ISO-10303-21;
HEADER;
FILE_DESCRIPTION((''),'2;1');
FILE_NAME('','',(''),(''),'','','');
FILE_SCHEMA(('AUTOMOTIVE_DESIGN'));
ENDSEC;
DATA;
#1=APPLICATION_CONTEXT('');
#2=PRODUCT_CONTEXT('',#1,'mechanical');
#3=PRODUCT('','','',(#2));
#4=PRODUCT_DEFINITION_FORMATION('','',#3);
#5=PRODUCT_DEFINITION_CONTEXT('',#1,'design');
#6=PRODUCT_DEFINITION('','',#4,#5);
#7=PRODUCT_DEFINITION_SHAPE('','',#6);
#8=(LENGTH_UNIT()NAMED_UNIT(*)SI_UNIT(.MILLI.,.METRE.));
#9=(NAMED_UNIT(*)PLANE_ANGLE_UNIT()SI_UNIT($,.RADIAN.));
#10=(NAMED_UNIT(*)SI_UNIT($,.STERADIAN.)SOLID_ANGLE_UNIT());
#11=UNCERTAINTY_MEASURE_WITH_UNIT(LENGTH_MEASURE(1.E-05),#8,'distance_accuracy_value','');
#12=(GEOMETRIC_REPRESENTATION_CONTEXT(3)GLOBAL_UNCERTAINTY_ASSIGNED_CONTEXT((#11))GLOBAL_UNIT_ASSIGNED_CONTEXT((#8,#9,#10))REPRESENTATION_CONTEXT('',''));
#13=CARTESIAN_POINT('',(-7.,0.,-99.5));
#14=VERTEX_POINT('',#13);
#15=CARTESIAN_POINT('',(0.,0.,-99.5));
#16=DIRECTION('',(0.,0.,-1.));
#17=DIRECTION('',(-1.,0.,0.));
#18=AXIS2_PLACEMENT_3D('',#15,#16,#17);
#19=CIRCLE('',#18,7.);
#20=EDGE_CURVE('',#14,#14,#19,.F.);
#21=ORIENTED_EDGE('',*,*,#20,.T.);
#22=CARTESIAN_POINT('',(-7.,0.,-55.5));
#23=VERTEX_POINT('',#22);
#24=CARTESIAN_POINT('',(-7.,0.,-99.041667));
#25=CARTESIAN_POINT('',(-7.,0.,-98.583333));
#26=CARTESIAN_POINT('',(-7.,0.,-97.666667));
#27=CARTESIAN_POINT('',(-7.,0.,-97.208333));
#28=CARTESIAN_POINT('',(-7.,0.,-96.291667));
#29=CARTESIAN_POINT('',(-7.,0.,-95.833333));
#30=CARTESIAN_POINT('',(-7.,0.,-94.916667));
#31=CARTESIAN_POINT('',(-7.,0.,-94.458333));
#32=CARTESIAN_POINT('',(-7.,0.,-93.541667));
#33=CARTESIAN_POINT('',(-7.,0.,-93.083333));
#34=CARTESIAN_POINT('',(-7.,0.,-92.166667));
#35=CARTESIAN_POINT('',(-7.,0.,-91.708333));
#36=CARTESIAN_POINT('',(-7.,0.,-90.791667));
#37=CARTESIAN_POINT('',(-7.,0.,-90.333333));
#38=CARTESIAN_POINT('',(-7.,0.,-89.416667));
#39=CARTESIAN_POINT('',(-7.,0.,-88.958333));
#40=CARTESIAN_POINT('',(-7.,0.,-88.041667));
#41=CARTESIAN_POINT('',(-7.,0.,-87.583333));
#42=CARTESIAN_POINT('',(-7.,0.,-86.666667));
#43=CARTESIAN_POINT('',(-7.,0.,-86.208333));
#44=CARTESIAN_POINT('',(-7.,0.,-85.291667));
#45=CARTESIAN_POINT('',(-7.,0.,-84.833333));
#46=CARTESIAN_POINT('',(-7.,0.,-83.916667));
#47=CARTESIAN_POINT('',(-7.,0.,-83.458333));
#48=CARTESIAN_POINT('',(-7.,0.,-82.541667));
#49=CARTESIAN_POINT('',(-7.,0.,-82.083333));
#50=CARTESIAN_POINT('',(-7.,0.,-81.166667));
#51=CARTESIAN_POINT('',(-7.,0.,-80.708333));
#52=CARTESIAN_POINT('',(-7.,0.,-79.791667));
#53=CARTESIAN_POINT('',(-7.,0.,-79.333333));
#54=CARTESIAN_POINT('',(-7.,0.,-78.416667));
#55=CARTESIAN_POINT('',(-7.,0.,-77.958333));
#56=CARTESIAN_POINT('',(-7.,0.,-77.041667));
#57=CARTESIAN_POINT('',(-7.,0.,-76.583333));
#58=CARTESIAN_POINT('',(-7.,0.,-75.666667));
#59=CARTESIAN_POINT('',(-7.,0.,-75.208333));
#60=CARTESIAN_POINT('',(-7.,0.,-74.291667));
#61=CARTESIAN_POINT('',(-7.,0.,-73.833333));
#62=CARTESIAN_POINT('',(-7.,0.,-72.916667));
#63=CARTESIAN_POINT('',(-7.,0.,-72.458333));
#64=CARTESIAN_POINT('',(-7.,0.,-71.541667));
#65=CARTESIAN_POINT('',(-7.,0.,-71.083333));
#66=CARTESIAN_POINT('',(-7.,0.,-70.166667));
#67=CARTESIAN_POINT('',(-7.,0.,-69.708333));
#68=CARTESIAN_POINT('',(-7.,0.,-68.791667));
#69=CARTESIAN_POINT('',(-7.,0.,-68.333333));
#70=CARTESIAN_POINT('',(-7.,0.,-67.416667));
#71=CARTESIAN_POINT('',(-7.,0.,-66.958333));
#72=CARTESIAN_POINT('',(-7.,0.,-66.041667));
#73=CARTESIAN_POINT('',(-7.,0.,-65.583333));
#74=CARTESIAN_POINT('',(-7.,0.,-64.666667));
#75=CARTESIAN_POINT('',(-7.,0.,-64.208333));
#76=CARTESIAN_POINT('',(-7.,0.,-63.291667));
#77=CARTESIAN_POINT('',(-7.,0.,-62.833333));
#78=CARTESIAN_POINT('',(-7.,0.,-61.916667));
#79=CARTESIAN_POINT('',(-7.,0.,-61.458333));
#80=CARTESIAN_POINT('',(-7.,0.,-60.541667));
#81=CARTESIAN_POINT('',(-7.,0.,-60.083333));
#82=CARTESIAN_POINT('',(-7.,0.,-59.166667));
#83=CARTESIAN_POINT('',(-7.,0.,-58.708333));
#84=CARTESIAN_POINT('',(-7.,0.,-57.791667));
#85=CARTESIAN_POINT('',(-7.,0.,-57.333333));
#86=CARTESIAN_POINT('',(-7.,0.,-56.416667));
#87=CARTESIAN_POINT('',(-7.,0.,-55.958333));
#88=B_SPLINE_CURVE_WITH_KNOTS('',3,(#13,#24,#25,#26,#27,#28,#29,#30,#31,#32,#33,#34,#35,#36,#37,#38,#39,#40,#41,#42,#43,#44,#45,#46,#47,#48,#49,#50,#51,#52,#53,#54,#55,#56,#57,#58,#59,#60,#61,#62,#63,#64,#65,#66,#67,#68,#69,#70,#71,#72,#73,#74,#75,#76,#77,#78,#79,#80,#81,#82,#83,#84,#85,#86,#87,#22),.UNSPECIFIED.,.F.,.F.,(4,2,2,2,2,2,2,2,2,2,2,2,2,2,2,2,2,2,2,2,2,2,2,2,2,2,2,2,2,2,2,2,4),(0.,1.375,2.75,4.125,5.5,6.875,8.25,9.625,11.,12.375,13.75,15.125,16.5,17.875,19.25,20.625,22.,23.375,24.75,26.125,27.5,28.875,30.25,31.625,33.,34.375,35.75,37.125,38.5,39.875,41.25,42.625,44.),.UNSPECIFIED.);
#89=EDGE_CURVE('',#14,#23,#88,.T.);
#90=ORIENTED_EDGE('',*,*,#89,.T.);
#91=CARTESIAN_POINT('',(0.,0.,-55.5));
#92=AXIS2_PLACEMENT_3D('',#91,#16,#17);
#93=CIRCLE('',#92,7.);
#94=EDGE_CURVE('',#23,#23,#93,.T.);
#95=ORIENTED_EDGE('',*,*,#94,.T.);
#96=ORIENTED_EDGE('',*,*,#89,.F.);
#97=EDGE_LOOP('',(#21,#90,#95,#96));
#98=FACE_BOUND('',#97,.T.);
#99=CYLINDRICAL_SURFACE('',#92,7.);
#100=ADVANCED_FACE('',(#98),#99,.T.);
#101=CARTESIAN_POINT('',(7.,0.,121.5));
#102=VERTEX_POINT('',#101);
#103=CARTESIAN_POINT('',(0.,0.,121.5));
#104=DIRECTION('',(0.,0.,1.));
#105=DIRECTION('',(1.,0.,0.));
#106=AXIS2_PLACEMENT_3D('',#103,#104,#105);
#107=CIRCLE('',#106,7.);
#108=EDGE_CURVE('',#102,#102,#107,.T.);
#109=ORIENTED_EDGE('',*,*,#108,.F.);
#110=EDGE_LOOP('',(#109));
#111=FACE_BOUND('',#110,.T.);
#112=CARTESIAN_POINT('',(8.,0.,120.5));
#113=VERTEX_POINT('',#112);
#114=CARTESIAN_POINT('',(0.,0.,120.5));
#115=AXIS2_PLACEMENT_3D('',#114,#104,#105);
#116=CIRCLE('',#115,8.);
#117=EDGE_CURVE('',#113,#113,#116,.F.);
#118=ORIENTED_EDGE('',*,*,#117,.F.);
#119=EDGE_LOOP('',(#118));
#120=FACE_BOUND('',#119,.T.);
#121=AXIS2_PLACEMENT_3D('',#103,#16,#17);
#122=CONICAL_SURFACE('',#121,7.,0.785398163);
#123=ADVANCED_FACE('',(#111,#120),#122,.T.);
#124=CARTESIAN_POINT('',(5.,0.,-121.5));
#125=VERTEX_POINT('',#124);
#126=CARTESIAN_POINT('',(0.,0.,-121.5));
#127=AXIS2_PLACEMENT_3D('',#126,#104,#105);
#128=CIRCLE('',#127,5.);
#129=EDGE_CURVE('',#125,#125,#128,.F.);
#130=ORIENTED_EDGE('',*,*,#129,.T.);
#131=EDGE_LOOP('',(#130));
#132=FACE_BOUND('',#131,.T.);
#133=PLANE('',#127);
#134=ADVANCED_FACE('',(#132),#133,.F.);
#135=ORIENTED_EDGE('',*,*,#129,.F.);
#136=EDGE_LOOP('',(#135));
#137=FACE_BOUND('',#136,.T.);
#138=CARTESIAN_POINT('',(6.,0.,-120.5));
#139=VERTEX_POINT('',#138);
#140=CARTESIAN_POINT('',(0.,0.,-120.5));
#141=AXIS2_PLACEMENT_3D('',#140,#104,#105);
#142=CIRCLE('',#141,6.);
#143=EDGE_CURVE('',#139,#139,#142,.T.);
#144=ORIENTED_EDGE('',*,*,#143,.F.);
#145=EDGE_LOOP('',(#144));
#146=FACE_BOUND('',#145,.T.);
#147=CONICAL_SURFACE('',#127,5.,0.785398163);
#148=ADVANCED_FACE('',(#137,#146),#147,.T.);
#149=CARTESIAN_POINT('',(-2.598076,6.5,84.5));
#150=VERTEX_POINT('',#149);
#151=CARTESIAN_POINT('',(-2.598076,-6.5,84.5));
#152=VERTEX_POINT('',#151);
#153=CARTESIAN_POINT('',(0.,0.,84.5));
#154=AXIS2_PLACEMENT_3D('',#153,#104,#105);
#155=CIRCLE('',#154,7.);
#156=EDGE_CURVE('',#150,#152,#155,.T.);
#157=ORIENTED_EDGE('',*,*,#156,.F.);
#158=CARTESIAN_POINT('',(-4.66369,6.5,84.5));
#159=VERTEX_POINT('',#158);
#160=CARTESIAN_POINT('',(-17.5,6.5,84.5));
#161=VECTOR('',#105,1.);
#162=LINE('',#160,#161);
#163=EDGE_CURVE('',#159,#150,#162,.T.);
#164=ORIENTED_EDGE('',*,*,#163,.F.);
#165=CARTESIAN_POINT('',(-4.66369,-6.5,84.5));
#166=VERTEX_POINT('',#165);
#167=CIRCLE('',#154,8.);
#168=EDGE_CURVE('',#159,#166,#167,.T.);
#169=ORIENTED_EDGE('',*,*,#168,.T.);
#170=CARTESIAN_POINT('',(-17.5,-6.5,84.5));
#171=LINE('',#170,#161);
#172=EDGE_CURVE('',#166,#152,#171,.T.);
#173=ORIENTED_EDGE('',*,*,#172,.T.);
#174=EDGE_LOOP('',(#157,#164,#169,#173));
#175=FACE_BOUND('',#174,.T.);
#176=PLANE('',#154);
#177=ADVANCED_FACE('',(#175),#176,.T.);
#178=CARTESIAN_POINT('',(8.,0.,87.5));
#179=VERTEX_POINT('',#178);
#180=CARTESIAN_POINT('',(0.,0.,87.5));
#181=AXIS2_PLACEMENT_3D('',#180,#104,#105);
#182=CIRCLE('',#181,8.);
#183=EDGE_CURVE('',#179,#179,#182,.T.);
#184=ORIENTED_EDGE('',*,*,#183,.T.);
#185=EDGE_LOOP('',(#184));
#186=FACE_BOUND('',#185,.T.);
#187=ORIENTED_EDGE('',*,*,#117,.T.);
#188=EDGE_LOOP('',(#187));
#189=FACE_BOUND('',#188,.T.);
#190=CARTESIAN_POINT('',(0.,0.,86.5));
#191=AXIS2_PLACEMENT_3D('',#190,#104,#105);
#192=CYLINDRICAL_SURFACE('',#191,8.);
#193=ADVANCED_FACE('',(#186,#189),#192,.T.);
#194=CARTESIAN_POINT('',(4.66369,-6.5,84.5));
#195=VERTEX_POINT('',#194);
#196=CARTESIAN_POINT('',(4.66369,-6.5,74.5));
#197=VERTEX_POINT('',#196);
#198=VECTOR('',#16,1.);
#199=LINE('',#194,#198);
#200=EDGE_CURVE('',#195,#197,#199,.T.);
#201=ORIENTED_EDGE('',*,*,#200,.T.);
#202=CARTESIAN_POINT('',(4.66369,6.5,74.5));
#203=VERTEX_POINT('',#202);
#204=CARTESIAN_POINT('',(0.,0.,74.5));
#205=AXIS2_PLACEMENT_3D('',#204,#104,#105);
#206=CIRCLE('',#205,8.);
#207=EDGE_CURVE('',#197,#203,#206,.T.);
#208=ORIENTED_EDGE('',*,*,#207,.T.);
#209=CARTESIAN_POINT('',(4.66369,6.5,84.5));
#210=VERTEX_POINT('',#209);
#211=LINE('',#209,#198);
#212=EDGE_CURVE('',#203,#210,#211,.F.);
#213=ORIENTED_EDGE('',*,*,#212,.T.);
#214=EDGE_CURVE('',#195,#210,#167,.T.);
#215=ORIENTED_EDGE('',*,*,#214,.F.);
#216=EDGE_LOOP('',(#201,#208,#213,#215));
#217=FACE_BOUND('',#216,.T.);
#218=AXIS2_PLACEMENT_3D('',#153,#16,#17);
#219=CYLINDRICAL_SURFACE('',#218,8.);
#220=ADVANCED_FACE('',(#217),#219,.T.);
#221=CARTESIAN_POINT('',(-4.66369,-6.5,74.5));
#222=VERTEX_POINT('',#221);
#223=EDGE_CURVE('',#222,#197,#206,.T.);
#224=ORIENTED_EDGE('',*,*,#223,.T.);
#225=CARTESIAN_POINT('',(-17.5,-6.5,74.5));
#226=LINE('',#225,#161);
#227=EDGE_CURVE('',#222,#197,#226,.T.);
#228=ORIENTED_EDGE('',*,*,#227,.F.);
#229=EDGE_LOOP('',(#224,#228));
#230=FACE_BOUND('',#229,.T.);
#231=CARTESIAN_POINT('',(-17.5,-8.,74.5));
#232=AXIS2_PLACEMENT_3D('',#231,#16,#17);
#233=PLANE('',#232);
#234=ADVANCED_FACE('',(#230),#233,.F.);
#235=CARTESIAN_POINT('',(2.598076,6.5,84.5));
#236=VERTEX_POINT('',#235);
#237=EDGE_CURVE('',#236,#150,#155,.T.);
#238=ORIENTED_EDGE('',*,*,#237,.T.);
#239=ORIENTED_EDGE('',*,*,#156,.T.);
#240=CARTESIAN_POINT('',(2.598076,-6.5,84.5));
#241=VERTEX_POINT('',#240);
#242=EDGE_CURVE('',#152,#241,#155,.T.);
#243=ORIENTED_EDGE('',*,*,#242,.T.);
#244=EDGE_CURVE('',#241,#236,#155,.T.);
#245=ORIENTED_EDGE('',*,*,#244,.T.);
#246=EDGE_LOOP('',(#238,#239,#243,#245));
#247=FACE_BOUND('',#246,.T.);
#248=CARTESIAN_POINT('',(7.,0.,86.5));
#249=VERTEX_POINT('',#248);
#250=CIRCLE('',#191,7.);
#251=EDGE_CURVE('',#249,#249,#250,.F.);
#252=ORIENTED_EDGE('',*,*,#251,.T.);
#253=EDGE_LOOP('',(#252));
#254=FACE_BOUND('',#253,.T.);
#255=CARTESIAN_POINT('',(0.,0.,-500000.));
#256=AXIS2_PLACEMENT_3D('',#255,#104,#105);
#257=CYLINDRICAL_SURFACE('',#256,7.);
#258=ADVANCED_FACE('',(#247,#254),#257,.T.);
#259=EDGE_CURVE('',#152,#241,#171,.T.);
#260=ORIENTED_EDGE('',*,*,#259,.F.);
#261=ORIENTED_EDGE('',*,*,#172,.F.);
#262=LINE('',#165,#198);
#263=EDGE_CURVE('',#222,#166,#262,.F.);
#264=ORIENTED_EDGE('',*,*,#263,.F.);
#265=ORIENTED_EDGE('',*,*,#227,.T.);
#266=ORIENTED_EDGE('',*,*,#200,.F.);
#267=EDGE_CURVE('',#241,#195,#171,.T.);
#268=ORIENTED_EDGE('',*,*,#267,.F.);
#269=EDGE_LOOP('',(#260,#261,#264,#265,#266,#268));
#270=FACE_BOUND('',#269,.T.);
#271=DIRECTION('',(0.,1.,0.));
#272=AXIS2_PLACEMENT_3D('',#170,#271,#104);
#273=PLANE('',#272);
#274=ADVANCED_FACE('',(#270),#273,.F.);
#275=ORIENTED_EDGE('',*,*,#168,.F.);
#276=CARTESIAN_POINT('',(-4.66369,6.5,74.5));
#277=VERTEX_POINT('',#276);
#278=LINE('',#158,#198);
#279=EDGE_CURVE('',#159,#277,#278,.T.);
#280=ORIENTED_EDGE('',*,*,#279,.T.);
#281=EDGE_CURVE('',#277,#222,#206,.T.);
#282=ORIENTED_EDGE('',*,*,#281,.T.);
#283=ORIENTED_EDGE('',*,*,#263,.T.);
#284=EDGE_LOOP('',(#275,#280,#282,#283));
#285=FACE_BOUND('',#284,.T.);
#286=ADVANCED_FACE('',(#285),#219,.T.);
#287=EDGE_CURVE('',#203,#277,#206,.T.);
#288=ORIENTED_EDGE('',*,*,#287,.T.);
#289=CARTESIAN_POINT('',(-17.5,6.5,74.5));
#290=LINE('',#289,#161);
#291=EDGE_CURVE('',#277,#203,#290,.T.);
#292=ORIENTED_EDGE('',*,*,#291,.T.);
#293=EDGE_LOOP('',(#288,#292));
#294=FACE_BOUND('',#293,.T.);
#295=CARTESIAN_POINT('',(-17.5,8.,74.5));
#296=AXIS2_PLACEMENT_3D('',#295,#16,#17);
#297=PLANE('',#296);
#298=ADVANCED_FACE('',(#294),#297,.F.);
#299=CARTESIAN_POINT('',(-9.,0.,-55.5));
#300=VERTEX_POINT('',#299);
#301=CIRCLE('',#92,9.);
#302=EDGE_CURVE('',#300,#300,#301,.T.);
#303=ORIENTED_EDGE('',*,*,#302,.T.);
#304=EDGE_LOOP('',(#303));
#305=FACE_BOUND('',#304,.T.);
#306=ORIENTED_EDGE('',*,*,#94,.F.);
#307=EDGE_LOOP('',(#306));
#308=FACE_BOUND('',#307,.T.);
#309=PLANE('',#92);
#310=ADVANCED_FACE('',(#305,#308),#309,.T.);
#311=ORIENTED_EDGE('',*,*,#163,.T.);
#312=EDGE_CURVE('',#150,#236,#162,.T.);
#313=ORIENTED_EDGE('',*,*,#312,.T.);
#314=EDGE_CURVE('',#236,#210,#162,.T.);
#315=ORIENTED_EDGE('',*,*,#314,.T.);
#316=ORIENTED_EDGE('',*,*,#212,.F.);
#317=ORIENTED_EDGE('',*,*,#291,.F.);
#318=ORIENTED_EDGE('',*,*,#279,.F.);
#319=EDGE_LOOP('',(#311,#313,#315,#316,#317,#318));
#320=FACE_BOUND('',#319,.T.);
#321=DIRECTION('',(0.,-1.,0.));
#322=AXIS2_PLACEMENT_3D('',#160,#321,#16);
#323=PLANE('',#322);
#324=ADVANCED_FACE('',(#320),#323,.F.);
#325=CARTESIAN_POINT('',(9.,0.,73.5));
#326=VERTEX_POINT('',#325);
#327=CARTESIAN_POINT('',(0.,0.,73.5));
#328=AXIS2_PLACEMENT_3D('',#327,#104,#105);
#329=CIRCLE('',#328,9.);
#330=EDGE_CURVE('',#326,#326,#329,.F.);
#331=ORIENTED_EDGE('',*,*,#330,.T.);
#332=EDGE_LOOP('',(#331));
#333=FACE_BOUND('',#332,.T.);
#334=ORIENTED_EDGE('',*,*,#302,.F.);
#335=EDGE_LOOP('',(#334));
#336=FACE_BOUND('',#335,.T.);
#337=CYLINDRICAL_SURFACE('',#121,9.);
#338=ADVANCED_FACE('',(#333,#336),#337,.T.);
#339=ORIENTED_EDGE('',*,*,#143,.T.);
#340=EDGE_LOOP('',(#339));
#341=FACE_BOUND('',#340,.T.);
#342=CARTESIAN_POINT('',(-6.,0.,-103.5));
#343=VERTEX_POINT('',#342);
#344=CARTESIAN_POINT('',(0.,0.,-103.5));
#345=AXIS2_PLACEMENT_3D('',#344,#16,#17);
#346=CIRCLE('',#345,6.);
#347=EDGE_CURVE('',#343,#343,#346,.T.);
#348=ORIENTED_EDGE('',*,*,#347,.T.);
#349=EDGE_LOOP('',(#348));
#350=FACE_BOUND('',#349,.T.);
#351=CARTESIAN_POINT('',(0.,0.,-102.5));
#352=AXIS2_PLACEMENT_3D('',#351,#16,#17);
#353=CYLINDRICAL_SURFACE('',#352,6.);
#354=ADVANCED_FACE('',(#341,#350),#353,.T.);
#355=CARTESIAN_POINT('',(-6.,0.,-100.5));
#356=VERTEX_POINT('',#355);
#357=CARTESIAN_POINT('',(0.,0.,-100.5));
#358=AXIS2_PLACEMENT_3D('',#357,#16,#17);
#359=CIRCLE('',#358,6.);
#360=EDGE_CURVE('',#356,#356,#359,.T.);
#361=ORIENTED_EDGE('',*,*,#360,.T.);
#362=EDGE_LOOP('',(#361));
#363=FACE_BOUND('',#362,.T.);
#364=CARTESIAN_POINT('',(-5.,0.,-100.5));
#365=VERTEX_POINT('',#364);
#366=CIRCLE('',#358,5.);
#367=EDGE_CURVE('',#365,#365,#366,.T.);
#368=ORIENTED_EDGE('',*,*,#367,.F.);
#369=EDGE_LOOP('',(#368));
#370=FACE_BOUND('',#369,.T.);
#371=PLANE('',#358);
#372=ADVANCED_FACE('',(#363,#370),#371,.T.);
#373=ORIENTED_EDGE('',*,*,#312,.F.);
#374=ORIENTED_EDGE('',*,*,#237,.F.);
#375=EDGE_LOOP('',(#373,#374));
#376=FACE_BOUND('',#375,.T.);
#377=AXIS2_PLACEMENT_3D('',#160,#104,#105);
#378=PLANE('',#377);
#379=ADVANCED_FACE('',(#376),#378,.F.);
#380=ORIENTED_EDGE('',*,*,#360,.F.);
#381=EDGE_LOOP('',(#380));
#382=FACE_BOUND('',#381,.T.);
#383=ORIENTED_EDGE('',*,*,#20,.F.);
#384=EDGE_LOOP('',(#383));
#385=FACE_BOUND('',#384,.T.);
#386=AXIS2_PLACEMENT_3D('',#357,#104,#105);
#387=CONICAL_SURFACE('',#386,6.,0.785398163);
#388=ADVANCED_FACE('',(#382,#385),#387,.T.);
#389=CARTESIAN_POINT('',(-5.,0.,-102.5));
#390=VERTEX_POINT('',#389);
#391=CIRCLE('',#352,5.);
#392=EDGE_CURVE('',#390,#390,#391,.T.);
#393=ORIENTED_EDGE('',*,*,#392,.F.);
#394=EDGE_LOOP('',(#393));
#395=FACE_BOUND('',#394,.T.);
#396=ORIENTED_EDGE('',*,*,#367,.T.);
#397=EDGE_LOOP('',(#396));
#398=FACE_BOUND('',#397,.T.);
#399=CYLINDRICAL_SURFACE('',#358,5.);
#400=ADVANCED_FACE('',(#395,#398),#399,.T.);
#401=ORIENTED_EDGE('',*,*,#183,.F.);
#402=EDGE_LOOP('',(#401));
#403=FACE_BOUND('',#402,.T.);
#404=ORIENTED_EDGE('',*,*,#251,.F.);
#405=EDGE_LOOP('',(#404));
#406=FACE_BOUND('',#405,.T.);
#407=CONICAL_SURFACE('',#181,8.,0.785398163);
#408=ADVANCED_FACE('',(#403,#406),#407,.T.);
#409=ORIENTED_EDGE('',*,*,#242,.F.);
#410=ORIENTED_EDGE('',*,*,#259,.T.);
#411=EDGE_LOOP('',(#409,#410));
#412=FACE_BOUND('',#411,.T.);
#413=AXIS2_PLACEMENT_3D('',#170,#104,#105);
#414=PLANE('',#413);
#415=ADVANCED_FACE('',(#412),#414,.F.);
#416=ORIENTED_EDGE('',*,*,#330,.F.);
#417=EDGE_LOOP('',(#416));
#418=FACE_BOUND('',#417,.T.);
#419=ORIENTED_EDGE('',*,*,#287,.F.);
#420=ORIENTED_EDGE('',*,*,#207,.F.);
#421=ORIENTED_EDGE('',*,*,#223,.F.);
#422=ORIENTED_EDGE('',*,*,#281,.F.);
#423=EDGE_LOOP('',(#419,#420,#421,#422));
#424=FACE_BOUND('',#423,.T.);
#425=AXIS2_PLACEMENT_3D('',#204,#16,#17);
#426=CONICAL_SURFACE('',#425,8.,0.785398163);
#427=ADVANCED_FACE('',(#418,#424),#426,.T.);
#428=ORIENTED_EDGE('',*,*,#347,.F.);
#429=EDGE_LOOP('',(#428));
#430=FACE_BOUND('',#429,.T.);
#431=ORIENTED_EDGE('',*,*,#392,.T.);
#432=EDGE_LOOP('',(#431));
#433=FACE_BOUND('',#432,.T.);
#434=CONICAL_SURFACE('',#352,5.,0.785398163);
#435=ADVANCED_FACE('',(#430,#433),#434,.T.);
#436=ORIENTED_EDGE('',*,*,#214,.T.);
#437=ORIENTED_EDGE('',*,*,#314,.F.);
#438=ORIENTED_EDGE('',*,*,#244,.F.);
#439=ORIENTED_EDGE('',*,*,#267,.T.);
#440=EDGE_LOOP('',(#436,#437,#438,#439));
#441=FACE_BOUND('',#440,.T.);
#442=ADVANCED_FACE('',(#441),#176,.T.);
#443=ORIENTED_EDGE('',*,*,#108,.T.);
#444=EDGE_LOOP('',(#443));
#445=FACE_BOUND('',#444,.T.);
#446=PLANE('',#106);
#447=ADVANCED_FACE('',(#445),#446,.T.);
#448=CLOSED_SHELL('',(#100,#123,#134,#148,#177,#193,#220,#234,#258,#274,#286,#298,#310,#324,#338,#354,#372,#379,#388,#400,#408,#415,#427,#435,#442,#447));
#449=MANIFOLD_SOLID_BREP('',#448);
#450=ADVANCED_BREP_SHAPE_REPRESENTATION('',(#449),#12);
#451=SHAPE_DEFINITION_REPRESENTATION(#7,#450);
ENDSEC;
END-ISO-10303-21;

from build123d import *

# Parameters (mm, degrees)
SKETCH1_R           = 9
BOSS_EXTRUDE1_DEPTH = 121.5
SKETCH2_OUTSIDE_W   = 68.866
SKETCH2_OUTSIDE_H   = 68.866
SKETCH2_OUTSIDE_R   = 6
CUT_EXTRUDE2_DEPTH  = 19
SKETCH3_OUTSIDE_W   = 68.866
SKETCH3_OUTSIDE_H   = 68.866
SKETCH3_OUTSIDE_R   = 5
CUT_EXTRUDE3_DEPTH  = 2
SKETCH4_OUTSIDE_W   = 68.866
SKETCH4_OUTSIDE_H   = 68.866
SKETCH4_OUTSIDE_R   = 7
CUT_EXTRUDE4_DEPTH  = 45
CHAMFER1_SIZE       = 1
SKETCH5_OUTSIDE_W   = 68.866
SKETCH5_OUTSIDE_H   = 68.866
SKETCH5_OUTSIDE_R   = 6.5
CUT_EXTRUDE5_DEPTH  = 47
SKETCH6_R           = 8
BOSS_EXTRUDE2_DEPTH = 10
BOSS_EXTRUDE3_START = -35
SKETCH8_R           = 8
BOSS_EXTRUDE3_DEPTH = 35
CHAMFER3_SIZE       = 1
BOSS_EXTRUDE4_REACH = 210.389
SKETCH12_R          = 7
SKETCH14_W          = 10
SKETCH14_H          = 1.5
CUT_EXTRUDE7_DEPTH  = 17.5


with BuildPart() as part:
    # Sketch1 → Boss-Extrude1 (new, symmetric)
    with BuildSketch(Plane.XY):
        Circle(SKETCH1_R)
    extrude(amount=BOSS_EXTRUDE1_DEPTH, both=True)

    # Sketch2 outside → Cut-Extrude2 (cut)
    with BuildSketch(Plane(origin=(0, 0, -121.5), x_dir=(-1, 0, 0), z_dir=(0, 0, -1))):
        Rectangle(SKETCH2_OUTSIDE_W, SKETCH2_OUTSIDE_H)
        Circle(SKETCH2_OUTSIDE_R, mode=Mode.SUBTRACT)
    extrude(amount=-CUT_EXTRUDE2_DEPTH, mode=Mode.SUBTRACT)

    # Sketch3 outside → Cut-Extrude3 (cut)
    with BuildSketch(Plane(origin=(0, 0, -102.5), x_dir=(-1, 0, 0), z_dir=(0, 0, -1))):
        Rectangle(SKETCH3_OUTSIDE_W, SKETCH3_OUTSIDE_H)
        Circle(SKETCH3_OUTSIDE_R, mode=Mode.SUBTRACT)
    extrude(amount=-CUT_EXTRUDE3_DEPTH, mode=Mode.SUBTRACT)

    # Sketch4 outside → Cut-Extrude4 (cut)
    with BuildSketch(Plane(origin=(0, 0, -100.5), x_dir=(-1, 0, 0), z_dir=(0, 0, -1))):
        Rectangle(SKETCH4_OUTSIDE_W, SKETCH4_OUTSIDE_H)
        Circle(SKETCH4_OUTSIDE_R, mode=Mode.SUBTRACT)
    extrude(amount=-CUT_EXTRUDE4_DEPTH, mode=Mode.SUBTRACT)

    # Chamfer1
    chamfer1_edges = [part.edges().sort_by_distance(p)[0] for p in [
        (6, 0, -121.5),
        (6, 0, -102.5),
        (7, 0, -100.5),
    ]]
    chamfer(chamfer1_edges, length=CHAMFER1_SIZE - 0.0001)  # a hair under: the kernel refuses the full size

    # Sketch5 outside → Cut-Extrude5 (cut)
    with BuildSketch(Plane.XY.offset(121.5)):
        Rectangle(SKETCH5_OUTSIDE_W, SKETCH5_OUTSIDE_H)
        Circle(SKETCH5_OUTSIDE_R, mode=Mode.SUBTRACT)
    extrude(amount=-CUT_EXTRUDE5_DEPTH, mode=Mode.SUBTRACT)

    # Sketch6 → Boss-Extrude2 (add)
    with BuildSketch(Plane.XY.offset(74.5)):
        Circle(SKETCH6_R)
    extrude(amount=BOSS_EXTRUDE2_DEPTH)

    # Sketch8 → Boss-Extrude3 (add)
    with BuildSketch(Plane.XY.offset(121.5).offset(BOSS_EXTRUDE3_START)):
        Circle(SKETCH8_R)
    extrude(amount=BOSS_EXTRUDE3_DEPTH)

    # Chamfer3
    chamfer3_edges = [part.edges().sort_by_distance(p)[0] for p in [
        (-9, 0, 74.5),
        (-8, 0, 86.5),
        (-8, 0, 121.5),
    ]]
    chamfer(chamfer3_edges, length=CHAMFER3_SIZE - 0.0001)  # a hair under: the kernel refuses the full size

    # Sketch12 → Boss-Extrude4 (add, up to next)
    with BuildSketch(Plane(origin=(0, 0, 86.5), x_dir=(-1, 0, 0), z_dir=(0, 0, -1)), mode=Mode.PRIVATE) as boss_extrude4_sk1:
        Circle(SKETCH12_R)
    boss_extrude4_tool1 = extrude(boss_extrude4_sk1.sketch, amount=BOSS_EXTRUDE4_REACH, mode=Mode.PRIVATE) - part.part
    add(boss_extrude4_tool1.solids().sort_by_distance((0, 0, 86.5))[0])

    # Sketch14 → Cut-Extrude7 (cut, symmetric)
    with BuildSketch(Plane(origin=(0, 0, 0), x_dir=(0, 0, -1), z_dir=(1, 0, 0))):
        with Locations((-79.5, 7.25)):
            Rectangle(SKETCH14_W, SKETCH14_H)
        with Locations((-79.5, -7.25)):
            Rectangle(SKETCH14_W, SKETCH14_H)
    extrude(amount=CUT_EXTRUDE7_DEPTH, both=True, mode=Mode.SUBTRACT)


solid = part.part
